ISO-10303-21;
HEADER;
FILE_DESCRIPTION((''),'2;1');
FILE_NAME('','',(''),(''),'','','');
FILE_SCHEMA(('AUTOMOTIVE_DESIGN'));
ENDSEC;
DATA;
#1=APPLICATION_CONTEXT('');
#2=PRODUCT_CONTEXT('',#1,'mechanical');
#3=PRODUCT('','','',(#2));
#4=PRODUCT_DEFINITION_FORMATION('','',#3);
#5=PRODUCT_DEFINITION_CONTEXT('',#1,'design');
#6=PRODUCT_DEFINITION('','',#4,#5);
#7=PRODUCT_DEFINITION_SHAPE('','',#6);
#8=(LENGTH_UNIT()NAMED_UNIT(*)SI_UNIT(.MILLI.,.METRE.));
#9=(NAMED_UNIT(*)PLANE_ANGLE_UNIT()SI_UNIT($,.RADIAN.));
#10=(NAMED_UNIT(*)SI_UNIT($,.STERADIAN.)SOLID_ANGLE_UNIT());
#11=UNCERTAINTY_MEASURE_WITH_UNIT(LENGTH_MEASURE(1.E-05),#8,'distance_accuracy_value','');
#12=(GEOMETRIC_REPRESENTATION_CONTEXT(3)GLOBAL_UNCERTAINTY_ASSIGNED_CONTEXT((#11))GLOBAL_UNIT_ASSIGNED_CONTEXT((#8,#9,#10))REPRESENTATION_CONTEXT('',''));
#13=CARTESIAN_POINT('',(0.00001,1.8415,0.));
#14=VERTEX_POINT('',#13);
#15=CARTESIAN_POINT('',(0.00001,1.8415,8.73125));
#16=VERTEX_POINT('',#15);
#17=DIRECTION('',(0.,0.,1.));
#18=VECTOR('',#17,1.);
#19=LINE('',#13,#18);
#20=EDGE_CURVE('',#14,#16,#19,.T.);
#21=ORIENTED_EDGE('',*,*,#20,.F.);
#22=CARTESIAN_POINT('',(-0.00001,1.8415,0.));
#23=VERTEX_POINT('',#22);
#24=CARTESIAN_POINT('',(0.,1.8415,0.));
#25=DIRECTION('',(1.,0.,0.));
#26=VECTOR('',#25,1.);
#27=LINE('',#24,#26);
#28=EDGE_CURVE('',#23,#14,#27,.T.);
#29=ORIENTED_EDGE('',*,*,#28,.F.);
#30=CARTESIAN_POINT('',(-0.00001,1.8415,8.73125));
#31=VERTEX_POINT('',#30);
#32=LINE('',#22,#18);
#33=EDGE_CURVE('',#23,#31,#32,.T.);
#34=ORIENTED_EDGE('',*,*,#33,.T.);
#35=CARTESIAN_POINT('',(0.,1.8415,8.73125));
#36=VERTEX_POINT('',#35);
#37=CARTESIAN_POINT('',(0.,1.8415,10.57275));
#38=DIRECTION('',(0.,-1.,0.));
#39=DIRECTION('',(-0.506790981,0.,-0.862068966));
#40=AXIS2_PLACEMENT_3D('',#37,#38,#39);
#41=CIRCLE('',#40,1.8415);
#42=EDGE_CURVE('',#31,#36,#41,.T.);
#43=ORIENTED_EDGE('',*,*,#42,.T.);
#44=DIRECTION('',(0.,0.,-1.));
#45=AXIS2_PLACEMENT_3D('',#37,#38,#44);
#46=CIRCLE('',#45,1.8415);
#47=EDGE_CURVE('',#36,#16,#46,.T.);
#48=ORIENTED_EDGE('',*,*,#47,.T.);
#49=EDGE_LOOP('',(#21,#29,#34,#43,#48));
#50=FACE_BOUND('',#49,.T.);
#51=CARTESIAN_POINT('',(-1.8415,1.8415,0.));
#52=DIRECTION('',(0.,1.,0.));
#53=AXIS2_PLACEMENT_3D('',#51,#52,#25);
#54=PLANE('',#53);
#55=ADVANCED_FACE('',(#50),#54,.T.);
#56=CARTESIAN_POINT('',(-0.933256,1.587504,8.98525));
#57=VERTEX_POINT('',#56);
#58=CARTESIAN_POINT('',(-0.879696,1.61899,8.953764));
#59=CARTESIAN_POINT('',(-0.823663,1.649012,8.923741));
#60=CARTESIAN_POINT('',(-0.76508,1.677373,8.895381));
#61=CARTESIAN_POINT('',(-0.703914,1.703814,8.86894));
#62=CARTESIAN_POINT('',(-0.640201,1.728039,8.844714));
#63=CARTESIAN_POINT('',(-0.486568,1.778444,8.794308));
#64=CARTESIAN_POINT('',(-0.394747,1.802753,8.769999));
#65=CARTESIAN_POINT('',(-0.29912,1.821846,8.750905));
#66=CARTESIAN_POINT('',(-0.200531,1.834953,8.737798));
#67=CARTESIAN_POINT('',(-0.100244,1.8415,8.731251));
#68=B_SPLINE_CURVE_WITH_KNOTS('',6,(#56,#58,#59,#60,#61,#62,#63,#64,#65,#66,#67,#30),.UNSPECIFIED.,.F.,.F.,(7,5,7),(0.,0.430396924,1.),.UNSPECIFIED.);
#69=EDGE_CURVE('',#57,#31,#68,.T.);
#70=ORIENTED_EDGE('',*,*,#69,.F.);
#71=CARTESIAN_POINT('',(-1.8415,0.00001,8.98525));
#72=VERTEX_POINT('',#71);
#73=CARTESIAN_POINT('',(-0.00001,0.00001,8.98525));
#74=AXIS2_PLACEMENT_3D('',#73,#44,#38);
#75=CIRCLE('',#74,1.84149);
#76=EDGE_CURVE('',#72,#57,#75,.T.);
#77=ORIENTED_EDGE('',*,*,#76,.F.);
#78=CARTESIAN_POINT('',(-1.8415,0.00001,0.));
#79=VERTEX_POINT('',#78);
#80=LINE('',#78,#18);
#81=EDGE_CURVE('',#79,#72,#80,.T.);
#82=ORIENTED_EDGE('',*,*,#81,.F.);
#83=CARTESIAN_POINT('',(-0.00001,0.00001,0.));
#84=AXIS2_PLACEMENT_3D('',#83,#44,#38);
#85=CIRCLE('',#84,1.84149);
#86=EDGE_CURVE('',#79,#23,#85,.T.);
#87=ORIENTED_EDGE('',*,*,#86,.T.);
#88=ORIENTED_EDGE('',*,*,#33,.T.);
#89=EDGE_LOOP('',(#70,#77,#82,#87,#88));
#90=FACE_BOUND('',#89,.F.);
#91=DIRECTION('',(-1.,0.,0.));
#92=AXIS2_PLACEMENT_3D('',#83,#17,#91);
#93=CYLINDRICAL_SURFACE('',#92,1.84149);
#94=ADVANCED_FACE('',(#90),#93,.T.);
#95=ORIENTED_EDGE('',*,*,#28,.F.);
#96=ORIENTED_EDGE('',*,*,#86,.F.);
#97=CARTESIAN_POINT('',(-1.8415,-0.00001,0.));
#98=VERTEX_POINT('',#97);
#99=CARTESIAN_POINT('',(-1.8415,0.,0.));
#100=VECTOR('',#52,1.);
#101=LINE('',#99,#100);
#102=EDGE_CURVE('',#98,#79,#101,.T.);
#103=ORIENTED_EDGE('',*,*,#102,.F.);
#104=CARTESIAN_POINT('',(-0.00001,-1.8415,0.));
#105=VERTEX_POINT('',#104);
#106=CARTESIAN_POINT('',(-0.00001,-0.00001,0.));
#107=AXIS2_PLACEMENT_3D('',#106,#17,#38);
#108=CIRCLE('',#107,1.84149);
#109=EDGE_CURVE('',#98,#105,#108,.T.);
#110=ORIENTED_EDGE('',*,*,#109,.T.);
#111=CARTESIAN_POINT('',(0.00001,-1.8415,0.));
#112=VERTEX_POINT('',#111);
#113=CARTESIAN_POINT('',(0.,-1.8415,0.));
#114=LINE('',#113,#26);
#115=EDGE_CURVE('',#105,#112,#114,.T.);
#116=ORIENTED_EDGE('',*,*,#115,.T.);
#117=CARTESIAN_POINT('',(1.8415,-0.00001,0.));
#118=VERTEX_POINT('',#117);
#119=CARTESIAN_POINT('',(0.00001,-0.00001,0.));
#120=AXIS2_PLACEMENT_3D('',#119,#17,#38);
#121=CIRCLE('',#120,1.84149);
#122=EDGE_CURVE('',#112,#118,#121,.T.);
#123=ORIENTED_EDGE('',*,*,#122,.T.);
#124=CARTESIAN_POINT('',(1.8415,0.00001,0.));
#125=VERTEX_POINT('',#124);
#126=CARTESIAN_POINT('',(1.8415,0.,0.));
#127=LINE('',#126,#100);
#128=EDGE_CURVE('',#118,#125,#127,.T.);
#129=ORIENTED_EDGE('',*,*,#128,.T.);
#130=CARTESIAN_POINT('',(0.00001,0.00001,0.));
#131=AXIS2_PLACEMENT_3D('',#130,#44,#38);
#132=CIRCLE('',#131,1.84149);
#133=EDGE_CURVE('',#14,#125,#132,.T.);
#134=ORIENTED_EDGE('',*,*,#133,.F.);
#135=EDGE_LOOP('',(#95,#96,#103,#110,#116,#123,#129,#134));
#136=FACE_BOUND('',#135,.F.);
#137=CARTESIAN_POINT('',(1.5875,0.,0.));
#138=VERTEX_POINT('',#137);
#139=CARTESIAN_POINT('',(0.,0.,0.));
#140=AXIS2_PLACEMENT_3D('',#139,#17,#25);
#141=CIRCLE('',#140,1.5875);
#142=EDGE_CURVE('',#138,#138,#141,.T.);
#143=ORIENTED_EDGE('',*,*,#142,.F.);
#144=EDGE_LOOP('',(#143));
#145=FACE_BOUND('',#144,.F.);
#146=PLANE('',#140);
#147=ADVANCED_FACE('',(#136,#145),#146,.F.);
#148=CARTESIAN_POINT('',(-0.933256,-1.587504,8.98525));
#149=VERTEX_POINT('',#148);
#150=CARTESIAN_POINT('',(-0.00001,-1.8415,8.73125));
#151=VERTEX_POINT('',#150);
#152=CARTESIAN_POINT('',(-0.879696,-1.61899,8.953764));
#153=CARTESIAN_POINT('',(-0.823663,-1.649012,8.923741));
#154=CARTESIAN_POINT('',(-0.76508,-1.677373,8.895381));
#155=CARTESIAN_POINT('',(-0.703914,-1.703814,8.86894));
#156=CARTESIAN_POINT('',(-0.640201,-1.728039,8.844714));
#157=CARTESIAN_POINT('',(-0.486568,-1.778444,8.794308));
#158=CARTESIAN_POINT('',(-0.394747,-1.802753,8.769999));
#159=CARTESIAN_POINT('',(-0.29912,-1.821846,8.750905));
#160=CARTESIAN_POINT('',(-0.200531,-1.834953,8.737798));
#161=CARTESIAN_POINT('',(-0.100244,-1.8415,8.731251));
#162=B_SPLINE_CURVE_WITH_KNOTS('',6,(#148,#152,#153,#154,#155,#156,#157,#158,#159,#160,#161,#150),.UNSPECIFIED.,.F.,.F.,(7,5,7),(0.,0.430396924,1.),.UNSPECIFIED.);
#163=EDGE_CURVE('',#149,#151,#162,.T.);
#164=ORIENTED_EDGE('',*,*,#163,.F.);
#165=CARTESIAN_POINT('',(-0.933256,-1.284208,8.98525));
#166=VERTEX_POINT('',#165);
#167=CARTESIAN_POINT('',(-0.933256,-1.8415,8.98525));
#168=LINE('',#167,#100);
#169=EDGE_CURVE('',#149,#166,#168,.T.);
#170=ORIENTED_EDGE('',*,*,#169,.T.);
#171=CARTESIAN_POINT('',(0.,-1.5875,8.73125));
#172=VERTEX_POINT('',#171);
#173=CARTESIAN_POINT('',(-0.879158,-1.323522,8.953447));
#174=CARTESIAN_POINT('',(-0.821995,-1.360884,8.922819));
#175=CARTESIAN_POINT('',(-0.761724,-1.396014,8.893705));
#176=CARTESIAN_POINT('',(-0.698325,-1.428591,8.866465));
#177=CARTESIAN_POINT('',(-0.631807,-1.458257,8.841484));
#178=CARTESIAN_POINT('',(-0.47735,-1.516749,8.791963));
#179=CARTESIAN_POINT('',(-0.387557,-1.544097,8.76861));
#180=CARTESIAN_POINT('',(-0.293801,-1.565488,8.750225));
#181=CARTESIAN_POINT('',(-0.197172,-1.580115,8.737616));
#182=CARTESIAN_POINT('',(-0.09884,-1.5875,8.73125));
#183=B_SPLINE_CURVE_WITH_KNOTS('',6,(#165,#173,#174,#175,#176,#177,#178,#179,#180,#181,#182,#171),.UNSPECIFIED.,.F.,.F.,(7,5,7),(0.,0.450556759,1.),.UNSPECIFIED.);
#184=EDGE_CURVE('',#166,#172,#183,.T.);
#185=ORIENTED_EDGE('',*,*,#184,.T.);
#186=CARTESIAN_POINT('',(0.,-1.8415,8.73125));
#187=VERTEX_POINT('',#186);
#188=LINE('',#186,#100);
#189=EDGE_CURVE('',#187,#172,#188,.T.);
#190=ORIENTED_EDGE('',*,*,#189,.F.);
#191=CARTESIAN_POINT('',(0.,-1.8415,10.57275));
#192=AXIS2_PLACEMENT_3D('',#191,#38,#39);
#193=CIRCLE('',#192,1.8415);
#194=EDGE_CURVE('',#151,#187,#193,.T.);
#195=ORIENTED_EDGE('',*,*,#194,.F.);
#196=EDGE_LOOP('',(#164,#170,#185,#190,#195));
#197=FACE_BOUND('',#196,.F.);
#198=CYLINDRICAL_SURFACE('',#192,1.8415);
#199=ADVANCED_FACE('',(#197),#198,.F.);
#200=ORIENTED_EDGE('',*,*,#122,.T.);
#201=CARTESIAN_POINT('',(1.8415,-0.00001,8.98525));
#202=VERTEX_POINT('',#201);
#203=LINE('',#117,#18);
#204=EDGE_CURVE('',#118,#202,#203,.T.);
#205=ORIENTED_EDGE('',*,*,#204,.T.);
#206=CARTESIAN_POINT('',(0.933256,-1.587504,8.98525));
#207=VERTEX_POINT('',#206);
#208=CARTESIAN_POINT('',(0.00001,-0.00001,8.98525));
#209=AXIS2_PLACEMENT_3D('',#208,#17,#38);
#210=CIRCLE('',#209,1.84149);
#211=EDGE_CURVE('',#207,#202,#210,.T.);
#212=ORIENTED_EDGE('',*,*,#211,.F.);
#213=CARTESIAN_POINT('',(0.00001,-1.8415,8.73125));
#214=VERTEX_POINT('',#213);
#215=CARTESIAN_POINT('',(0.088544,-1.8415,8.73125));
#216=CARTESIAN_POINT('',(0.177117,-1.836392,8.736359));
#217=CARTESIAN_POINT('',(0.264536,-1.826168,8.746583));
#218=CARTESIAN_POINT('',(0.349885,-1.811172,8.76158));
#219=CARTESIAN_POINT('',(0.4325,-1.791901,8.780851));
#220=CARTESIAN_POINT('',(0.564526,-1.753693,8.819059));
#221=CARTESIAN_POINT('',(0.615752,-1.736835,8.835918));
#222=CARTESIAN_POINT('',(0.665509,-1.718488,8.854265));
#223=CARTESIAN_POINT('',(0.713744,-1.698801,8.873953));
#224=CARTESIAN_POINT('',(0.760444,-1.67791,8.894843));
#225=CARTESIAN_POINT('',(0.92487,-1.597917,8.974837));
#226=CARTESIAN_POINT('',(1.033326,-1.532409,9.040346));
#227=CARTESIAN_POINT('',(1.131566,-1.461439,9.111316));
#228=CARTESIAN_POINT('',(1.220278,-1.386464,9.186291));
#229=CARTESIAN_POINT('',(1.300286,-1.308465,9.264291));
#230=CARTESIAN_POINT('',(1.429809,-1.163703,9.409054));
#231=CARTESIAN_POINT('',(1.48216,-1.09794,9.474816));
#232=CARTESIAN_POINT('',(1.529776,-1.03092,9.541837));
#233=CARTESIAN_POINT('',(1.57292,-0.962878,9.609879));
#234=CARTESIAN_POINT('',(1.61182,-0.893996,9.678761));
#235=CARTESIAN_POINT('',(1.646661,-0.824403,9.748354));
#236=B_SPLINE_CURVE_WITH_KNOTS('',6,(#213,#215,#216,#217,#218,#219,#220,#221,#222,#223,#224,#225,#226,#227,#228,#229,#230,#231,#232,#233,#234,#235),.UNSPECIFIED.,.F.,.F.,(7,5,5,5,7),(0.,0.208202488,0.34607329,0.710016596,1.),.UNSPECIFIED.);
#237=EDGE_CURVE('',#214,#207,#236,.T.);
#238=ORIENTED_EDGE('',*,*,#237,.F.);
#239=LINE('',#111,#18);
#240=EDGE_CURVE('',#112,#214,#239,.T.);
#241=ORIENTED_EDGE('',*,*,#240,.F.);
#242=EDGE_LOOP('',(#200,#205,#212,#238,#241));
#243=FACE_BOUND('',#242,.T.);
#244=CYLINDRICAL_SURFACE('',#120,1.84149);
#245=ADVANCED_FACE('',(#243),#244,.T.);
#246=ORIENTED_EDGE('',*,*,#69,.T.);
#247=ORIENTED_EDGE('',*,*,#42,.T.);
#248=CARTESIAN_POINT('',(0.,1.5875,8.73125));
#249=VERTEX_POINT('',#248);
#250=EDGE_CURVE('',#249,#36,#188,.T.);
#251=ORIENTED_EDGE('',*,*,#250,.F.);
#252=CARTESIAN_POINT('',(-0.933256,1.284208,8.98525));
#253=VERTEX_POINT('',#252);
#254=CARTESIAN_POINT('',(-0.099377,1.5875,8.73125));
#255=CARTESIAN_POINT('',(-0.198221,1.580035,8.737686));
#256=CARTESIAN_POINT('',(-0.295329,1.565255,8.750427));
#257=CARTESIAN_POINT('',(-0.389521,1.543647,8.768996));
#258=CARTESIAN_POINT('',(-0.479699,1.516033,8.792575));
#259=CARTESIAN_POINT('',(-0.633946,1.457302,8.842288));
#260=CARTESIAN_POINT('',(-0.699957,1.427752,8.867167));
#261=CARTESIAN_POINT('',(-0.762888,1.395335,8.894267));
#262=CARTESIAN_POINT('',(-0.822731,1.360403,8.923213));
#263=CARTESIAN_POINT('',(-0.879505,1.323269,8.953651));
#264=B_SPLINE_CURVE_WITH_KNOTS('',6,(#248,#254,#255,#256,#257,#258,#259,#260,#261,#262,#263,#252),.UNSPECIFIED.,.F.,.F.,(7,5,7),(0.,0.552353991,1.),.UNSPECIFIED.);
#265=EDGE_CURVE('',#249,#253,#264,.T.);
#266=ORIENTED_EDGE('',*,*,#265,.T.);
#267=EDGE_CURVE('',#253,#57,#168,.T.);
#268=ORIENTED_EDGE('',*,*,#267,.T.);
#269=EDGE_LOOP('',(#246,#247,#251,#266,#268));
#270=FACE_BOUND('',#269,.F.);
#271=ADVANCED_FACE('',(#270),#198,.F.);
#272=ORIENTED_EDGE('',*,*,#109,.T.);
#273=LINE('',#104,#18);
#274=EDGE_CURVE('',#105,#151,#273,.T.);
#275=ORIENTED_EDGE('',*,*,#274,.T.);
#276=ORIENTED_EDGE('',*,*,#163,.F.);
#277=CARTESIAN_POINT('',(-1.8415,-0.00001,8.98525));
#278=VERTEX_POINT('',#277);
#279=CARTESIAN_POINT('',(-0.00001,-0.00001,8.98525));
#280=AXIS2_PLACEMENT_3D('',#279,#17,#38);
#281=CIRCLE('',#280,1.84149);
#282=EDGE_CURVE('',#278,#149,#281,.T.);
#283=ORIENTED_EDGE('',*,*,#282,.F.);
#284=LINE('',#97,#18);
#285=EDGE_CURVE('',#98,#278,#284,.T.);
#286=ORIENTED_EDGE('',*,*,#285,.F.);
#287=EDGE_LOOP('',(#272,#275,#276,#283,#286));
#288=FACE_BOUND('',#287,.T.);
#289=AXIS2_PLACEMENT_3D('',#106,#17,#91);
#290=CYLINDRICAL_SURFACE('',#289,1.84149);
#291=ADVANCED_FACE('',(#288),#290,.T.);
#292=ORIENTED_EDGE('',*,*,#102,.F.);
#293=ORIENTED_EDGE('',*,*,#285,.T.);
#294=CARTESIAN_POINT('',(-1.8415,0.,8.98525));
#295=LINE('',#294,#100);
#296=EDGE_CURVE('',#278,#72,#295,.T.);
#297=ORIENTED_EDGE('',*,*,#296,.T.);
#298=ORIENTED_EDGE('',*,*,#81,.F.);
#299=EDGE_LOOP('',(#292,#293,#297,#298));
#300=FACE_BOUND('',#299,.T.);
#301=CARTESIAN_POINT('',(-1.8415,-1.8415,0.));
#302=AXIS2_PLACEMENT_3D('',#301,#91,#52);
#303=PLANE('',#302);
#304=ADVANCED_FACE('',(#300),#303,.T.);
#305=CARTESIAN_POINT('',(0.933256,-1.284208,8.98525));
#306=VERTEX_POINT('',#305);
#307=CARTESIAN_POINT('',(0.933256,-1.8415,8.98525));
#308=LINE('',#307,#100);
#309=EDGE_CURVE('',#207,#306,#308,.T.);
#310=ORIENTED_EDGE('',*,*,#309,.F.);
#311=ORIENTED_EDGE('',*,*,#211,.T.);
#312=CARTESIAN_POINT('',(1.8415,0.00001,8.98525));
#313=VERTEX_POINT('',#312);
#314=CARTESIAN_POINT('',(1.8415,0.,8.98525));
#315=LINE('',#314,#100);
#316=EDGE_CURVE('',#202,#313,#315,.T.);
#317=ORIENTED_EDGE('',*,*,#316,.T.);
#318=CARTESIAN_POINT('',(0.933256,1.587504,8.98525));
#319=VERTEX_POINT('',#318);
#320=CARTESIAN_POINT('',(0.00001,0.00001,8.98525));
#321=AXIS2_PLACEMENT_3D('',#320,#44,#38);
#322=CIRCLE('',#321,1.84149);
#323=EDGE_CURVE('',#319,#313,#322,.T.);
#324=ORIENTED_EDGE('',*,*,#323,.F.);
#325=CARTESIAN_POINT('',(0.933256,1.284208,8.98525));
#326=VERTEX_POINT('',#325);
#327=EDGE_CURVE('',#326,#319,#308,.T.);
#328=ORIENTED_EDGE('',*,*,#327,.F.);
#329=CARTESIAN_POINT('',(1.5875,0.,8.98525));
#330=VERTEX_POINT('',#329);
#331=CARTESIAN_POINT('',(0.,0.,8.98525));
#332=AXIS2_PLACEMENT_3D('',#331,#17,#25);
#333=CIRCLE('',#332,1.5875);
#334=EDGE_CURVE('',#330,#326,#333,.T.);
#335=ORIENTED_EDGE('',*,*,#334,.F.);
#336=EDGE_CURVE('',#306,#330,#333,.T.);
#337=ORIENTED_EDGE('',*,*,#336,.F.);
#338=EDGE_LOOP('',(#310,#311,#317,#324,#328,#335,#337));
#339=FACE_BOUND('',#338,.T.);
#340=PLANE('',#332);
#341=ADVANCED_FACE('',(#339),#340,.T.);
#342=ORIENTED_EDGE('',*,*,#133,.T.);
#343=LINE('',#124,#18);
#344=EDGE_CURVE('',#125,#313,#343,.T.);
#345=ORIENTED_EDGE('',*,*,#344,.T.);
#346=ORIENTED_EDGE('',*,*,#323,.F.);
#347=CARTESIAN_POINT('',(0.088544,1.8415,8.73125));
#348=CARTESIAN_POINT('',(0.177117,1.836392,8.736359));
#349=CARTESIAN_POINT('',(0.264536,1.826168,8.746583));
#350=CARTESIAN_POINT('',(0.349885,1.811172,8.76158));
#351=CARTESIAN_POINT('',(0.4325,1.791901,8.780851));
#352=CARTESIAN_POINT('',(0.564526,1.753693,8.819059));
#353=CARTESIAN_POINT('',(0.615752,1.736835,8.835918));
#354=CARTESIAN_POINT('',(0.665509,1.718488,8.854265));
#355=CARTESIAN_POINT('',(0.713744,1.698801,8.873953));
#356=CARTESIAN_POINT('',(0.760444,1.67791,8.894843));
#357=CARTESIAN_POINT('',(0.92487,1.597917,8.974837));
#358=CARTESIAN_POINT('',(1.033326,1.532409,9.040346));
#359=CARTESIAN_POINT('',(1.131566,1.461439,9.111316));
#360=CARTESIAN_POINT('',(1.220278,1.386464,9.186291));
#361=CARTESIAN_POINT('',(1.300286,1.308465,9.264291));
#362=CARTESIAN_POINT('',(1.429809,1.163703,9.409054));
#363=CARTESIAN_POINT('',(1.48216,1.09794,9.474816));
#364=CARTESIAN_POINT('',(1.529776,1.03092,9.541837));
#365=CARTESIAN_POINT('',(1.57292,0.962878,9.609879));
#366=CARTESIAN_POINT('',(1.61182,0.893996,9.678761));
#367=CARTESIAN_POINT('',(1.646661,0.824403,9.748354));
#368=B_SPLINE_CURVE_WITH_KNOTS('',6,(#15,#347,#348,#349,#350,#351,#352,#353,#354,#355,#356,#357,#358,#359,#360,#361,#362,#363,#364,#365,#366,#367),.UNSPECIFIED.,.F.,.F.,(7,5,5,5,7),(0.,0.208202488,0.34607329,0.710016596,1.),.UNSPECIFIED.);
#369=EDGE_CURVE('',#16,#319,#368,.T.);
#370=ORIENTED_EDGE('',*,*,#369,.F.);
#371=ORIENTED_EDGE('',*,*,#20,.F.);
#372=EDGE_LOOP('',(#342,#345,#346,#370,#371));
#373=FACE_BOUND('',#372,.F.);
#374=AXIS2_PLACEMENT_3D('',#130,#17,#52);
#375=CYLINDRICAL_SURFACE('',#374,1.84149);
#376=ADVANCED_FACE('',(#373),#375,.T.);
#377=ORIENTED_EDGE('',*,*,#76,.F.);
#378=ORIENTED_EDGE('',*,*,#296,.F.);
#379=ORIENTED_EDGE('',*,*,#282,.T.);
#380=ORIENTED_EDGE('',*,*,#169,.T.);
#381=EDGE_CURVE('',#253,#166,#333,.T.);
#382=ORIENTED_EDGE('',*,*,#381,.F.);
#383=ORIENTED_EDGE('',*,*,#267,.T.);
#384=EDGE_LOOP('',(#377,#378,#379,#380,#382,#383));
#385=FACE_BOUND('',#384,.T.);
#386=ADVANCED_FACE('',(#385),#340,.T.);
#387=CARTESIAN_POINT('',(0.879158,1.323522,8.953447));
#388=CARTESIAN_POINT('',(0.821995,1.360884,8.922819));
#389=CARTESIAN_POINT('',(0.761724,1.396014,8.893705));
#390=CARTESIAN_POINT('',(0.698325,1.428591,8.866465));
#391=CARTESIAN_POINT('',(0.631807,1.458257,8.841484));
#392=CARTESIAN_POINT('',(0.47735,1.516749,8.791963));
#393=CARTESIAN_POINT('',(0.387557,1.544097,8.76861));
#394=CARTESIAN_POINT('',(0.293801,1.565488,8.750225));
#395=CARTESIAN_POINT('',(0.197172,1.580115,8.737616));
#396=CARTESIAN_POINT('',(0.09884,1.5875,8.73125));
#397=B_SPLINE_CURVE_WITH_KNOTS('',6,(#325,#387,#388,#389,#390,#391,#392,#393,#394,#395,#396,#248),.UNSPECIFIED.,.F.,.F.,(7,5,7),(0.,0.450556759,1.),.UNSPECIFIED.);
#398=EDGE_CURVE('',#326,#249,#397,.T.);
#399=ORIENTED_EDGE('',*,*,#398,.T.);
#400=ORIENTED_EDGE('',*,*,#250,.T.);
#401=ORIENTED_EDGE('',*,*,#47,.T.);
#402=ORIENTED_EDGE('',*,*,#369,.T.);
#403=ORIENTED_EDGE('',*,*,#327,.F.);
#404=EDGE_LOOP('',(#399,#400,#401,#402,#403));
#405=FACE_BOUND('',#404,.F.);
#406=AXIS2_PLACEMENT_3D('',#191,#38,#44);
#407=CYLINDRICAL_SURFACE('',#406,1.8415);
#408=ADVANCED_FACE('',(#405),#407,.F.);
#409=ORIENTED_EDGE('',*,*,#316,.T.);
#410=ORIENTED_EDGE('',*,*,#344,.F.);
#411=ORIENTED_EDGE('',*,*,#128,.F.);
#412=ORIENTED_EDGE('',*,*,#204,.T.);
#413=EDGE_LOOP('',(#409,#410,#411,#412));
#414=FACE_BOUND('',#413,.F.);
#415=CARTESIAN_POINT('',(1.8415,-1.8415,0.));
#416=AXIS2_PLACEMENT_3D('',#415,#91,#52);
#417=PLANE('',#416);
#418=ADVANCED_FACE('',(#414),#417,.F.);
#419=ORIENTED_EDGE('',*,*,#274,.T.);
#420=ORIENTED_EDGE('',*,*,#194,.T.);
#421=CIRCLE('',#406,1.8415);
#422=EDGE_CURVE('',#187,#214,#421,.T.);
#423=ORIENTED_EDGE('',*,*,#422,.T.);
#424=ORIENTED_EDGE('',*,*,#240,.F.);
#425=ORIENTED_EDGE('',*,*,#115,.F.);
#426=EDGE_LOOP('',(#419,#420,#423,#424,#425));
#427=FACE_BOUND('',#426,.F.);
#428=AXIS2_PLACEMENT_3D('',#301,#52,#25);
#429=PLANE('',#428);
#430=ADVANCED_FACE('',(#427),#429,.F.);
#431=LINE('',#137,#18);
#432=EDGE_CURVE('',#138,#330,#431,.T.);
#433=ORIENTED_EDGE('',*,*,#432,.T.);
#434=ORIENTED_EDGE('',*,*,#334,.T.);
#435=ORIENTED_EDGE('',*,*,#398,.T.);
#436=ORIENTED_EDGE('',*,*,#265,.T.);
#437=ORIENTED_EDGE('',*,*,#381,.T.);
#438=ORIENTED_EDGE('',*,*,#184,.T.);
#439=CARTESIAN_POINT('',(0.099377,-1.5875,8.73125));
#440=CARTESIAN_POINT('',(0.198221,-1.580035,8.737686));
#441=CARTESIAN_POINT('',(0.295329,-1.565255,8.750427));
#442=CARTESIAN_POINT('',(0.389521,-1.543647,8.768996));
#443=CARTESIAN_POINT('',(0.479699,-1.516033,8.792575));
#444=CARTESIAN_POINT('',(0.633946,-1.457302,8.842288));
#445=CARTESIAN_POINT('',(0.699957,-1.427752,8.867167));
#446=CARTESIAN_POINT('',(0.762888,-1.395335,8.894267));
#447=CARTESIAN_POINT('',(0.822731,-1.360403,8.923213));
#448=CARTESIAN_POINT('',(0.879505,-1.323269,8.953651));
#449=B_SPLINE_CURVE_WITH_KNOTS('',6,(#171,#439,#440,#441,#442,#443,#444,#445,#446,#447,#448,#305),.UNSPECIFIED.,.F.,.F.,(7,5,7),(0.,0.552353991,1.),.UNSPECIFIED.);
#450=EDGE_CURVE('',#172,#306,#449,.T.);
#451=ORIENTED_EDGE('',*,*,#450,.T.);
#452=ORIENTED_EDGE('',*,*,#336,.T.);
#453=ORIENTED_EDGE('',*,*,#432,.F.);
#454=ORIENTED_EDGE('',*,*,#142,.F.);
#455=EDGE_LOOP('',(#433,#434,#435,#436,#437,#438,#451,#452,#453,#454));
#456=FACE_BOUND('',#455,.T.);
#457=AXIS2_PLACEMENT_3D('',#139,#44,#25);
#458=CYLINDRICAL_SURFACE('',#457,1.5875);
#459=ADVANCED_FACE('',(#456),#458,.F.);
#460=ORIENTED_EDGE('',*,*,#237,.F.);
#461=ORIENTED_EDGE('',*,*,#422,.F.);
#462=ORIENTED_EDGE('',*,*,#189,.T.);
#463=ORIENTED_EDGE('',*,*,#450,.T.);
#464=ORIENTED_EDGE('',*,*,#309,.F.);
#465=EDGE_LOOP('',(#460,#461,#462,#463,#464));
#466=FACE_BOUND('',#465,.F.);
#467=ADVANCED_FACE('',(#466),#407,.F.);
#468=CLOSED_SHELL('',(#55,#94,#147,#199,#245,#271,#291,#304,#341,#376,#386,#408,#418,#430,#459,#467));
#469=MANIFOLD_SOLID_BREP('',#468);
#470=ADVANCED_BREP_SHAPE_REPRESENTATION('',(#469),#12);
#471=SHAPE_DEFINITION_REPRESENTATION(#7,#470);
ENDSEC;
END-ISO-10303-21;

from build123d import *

# Parameters (mm, degrees)
F0_W     = 3.683
F0_H     = 3.683
F0_R     = 1.5875
F1_DEPTH = 8.98525
F3_DEPTH = 3.683
F4_R     = 1.84149


# Not quite as in the source:
# - a fillet or chamfer is up to 0.001 mm smaller than in the source, because OpenCascade refuses the exact size


with BuildPart() as f1:
    # F0 (on Top) → F1 (new body)
    with BuildSketch(Plane.XY):
        Rectangle(F0_W, F0_H)
        Circle(F0_R, mode=Mode.SUBTRACT)
    extrude(amount=F1_DEPTH)

    # F2 (on face) → F3 (cut, through all)
    with BuildSketch(Plane.XZ.offset(1.8415)):
        with BuildLine():
            Line((0, 8.98525), (-0.933255592, 8.98525))
            ThreePointArc((-0.933255592, 8.98525), (-0.4836015922, 8.7958842904), (0, 8.73125))
            Line((0, 8.73125), (0, 8.98525))
        make_face()
        with BuildLine():
            Line((0, 8.98525), (0, 8.73125))
            ThreePointArc((0, 8.73125), (0.4836015922, 8.7958842904), (0.933255592, 8.98525))
            Line((0.933255592, 8.98525), (0, 8.98525))
        make_face()
    extrude(amount=-F3_DEPTH, mode=Mode.SUBTRACT)

    # F4 (radius 1.8415 in the source; OpenCascade refuses exactly that, so slightly less here)
    f4_edges = [f1.edges().sort_by_distance(p)[0] for p in [
        (-1.8415, -1.8415, 4.492625),
        (1.8415, -1.8415, 4.492625),
        (1.8415, 1.8415, 4.492625),
        (-1.8415, 1.8415, 4.492625),
    ]]
    fillet(f4_edges, radius=F4_R)


solid = f1.part
